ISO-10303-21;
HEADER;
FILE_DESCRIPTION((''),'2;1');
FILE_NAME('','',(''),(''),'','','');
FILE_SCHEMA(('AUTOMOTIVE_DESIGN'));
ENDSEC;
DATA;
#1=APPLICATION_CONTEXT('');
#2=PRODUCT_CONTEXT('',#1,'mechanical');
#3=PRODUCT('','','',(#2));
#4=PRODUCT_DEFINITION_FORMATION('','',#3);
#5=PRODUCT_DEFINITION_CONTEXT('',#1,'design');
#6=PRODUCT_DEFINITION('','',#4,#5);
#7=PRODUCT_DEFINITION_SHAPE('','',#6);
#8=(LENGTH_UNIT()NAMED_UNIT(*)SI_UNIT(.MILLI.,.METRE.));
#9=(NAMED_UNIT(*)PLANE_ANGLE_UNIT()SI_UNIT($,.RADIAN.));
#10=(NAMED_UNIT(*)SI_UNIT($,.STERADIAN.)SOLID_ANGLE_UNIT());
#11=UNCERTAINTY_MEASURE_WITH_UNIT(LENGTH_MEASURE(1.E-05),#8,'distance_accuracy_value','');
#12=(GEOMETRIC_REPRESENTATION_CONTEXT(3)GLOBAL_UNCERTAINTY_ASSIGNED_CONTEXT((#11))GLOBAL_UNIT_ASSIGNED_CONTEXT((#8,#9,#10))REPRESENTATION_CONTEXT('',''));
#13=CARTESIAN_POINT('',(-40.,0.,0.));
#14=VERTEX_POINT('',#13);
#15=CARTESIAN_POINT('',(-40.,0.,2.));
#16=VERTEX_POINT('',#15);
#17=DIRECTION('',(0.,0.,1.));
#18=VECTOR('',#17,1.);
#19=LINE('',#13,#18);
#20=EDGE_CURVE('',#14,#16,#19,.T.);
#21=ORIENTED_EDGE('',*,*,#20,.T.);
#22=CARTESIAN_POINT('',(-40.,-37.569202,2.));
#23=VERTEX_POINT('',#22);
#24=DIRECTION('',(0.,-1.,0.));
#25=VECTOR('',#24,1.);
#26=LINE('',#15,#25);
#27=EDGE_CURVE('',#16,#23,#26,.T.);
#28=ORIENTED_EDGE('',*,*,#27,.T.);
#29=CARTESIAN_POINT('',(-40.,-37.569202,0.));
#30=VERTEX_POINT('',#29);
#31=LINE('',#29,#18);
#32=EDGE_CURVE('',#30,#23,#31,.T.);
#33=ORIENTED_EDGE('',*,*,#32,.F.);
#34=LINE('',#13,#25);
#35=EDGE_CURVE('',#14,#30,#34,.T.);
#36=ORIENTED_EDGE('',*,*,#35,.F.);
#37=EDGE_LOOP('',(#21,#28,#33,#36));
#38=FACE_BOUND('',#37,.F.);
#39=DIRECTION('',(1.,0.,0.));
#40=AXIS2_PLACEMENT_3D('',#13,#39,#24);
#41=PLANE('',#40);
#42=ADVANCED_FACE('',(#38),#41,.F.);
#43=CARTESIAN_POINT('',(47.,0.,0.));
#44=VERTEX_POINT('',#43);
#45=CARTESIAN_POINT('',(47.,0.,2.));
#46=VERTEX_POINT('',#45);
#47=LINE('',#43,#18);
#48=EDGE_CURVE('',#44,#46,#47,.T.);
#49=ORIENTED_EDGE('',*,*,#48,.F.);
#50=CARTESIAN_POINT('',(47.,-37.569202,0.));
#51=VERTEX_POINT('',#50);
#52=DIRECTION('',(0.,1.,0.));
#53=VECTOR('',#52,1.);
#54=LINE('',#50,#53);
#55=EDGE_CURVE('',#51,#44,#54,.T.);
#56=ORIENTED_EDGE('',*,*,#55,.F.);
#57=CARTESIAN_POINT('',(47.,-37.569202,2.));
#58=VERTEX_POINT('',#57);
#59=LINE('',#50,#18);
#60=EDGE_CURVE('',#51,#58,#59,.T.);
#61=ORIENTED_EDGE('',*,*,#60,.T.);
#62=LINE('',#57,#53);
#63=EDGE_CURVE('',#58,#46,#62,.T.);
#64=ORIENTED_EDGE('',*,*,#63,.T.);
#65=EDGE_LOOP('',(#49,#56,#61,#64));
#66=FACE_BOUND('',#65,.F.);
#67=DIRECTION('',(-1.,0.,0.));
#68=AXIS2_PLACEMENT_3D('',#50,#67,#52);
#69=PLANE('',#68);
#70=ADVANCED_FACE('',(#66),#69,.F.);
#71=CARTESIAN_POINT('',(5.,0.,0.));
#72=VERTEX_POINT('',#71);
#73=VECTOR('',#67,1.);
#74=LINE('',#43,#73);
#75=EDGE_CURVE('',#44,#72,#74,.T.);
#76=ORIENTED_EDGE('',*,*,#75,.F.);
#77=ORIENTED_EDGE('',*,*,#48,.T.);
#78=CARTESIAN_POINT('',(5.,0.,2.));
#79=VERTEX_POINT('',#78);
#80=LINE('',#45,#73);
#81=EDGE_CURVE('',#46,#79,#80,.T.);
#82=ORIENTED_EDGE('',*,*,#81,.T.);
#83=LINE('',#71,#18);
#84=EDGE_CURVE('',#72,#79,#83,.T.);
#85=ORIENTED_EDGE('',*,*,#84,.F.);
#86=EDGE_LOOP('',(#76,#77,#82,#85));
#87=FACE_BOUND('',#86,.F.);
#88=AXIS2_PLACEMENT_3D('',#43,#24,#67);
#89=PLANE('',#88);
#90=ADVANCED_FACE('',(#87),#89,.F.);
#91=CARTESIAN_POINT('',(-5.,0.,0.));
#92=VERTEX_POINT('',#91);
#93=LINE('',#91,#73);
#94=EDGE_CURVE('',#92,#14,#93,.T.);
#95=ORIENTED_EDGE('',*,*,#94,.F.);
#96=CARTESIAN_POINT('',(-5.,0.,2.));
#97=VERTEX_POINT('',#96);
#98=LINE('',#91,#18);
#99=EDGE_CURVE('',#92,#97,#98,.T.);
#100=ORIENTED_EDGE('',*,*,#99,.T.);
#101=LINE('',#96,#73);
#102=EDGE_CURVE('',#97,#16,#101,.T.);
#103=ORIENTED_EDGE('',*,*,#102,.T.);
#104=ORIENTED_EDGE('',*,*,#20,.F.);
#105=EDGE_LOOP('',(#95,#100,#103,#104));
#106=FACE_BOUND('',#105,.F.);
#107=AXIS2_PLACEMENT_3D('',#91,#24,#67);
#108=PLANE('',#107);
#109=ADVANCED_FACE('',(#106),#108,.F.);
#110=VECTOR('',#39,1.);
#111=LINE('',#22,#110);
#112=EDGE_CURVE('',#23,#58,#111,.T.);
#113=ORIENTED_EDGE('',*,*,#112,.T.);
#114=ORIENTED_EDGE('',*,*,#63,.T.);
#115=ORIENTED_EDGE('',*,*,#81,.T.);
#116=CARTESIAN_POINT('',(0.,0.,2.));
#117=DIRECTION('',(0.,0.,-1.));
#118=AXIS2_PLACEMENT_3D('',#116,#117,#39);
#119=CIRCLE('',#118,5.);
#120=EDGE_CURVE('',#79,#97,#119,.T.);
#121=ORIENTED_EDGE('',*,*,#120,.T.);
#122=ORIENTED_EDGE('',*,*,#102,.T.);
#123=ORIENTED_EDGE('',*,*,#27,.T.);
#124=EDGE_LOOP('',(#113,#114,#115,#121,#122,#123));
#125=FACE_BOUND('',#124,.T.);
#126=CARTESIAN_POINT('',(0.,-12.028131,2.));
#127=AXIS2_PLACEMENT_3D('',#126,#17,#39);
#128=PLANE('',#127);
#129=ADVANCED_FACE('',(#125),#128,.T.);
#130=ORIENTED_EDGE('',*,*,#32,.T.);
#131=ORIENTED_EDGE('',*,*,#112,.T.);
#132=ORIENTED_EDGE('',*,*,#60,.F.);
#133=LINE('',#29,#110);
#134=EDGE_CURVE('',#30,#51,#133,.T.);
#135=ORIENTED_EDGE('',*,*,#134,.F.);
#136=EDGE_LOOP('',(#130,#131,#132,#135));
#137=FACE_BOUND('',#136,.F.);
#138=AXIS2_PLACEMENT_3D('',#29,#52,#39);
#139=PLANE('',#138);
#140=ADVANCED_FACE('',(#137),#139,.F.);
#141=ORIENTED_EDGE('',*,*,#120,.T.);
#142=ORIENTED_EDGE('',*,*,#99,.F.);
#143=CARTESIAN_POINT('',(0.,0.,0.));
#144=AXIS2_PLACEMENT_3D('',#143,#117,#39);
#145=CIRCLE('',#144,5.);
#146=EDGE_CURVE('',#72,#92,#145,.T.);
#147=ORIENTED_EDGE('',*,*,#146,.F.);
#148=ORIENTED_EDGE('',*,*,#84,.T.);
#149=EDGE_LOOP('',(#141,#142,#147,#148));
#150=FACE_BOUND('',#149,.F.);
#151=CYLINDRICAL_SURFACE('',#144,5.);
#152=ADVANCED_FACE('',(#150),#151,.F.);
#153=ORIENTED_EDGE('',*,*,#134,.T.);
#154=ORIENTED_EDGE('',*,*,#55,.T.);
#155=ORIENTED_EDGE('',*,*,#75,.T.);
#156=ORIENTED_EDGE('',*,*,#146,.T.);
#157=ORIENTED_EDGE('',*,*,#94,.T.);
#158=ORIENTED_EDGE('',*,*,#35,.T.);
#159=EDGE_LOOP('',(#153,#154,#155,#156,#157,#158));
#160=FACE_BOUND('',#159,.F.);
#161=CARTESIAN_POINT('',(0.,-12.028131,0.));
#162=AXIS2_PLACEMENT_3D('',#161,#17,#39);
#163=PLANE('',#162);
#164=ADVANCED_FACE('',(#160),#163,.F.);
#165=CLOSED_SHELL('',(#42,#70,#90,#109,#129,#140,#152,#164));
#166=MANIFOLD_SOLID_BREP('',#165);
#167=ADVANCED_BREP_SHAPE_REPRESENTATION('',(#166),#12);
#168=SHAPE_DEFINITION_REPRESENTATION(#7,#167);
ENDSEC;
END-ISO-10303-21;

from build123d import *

# Parameters (mm, degrees)
F1_DEPTH = 2


with BuildPart() as f1:
    # F0 (on Top) → F1 (new body)
    with BuildSketch(Plane.XY):
        with BuildLine():
            Line((35, 0), (5, 0))
            ThreePointArc((5, 0), (0, -5), (-5, 0))
            Line((-5, 0), (-35, 0))
            ThreePointArc((-35, 0), (0, -35), (35, 0))
        make_face()
        with BuildLine():
            Line((47, 0), (35, 0))
            ThreePointArc((35, 0), (0, -35), (-35, 0))
            Line((-35, 0), (-40, 0))
            Line((-40, 0), (-40, -37.5692024827))
            Line((-40, -37.5692024827), (47, -37.5692024827))
            Line((47, -37.5692024827), (47, 0))
        make_face()
    extrude(amount=F1_DEPTH)


solid = f1.part
